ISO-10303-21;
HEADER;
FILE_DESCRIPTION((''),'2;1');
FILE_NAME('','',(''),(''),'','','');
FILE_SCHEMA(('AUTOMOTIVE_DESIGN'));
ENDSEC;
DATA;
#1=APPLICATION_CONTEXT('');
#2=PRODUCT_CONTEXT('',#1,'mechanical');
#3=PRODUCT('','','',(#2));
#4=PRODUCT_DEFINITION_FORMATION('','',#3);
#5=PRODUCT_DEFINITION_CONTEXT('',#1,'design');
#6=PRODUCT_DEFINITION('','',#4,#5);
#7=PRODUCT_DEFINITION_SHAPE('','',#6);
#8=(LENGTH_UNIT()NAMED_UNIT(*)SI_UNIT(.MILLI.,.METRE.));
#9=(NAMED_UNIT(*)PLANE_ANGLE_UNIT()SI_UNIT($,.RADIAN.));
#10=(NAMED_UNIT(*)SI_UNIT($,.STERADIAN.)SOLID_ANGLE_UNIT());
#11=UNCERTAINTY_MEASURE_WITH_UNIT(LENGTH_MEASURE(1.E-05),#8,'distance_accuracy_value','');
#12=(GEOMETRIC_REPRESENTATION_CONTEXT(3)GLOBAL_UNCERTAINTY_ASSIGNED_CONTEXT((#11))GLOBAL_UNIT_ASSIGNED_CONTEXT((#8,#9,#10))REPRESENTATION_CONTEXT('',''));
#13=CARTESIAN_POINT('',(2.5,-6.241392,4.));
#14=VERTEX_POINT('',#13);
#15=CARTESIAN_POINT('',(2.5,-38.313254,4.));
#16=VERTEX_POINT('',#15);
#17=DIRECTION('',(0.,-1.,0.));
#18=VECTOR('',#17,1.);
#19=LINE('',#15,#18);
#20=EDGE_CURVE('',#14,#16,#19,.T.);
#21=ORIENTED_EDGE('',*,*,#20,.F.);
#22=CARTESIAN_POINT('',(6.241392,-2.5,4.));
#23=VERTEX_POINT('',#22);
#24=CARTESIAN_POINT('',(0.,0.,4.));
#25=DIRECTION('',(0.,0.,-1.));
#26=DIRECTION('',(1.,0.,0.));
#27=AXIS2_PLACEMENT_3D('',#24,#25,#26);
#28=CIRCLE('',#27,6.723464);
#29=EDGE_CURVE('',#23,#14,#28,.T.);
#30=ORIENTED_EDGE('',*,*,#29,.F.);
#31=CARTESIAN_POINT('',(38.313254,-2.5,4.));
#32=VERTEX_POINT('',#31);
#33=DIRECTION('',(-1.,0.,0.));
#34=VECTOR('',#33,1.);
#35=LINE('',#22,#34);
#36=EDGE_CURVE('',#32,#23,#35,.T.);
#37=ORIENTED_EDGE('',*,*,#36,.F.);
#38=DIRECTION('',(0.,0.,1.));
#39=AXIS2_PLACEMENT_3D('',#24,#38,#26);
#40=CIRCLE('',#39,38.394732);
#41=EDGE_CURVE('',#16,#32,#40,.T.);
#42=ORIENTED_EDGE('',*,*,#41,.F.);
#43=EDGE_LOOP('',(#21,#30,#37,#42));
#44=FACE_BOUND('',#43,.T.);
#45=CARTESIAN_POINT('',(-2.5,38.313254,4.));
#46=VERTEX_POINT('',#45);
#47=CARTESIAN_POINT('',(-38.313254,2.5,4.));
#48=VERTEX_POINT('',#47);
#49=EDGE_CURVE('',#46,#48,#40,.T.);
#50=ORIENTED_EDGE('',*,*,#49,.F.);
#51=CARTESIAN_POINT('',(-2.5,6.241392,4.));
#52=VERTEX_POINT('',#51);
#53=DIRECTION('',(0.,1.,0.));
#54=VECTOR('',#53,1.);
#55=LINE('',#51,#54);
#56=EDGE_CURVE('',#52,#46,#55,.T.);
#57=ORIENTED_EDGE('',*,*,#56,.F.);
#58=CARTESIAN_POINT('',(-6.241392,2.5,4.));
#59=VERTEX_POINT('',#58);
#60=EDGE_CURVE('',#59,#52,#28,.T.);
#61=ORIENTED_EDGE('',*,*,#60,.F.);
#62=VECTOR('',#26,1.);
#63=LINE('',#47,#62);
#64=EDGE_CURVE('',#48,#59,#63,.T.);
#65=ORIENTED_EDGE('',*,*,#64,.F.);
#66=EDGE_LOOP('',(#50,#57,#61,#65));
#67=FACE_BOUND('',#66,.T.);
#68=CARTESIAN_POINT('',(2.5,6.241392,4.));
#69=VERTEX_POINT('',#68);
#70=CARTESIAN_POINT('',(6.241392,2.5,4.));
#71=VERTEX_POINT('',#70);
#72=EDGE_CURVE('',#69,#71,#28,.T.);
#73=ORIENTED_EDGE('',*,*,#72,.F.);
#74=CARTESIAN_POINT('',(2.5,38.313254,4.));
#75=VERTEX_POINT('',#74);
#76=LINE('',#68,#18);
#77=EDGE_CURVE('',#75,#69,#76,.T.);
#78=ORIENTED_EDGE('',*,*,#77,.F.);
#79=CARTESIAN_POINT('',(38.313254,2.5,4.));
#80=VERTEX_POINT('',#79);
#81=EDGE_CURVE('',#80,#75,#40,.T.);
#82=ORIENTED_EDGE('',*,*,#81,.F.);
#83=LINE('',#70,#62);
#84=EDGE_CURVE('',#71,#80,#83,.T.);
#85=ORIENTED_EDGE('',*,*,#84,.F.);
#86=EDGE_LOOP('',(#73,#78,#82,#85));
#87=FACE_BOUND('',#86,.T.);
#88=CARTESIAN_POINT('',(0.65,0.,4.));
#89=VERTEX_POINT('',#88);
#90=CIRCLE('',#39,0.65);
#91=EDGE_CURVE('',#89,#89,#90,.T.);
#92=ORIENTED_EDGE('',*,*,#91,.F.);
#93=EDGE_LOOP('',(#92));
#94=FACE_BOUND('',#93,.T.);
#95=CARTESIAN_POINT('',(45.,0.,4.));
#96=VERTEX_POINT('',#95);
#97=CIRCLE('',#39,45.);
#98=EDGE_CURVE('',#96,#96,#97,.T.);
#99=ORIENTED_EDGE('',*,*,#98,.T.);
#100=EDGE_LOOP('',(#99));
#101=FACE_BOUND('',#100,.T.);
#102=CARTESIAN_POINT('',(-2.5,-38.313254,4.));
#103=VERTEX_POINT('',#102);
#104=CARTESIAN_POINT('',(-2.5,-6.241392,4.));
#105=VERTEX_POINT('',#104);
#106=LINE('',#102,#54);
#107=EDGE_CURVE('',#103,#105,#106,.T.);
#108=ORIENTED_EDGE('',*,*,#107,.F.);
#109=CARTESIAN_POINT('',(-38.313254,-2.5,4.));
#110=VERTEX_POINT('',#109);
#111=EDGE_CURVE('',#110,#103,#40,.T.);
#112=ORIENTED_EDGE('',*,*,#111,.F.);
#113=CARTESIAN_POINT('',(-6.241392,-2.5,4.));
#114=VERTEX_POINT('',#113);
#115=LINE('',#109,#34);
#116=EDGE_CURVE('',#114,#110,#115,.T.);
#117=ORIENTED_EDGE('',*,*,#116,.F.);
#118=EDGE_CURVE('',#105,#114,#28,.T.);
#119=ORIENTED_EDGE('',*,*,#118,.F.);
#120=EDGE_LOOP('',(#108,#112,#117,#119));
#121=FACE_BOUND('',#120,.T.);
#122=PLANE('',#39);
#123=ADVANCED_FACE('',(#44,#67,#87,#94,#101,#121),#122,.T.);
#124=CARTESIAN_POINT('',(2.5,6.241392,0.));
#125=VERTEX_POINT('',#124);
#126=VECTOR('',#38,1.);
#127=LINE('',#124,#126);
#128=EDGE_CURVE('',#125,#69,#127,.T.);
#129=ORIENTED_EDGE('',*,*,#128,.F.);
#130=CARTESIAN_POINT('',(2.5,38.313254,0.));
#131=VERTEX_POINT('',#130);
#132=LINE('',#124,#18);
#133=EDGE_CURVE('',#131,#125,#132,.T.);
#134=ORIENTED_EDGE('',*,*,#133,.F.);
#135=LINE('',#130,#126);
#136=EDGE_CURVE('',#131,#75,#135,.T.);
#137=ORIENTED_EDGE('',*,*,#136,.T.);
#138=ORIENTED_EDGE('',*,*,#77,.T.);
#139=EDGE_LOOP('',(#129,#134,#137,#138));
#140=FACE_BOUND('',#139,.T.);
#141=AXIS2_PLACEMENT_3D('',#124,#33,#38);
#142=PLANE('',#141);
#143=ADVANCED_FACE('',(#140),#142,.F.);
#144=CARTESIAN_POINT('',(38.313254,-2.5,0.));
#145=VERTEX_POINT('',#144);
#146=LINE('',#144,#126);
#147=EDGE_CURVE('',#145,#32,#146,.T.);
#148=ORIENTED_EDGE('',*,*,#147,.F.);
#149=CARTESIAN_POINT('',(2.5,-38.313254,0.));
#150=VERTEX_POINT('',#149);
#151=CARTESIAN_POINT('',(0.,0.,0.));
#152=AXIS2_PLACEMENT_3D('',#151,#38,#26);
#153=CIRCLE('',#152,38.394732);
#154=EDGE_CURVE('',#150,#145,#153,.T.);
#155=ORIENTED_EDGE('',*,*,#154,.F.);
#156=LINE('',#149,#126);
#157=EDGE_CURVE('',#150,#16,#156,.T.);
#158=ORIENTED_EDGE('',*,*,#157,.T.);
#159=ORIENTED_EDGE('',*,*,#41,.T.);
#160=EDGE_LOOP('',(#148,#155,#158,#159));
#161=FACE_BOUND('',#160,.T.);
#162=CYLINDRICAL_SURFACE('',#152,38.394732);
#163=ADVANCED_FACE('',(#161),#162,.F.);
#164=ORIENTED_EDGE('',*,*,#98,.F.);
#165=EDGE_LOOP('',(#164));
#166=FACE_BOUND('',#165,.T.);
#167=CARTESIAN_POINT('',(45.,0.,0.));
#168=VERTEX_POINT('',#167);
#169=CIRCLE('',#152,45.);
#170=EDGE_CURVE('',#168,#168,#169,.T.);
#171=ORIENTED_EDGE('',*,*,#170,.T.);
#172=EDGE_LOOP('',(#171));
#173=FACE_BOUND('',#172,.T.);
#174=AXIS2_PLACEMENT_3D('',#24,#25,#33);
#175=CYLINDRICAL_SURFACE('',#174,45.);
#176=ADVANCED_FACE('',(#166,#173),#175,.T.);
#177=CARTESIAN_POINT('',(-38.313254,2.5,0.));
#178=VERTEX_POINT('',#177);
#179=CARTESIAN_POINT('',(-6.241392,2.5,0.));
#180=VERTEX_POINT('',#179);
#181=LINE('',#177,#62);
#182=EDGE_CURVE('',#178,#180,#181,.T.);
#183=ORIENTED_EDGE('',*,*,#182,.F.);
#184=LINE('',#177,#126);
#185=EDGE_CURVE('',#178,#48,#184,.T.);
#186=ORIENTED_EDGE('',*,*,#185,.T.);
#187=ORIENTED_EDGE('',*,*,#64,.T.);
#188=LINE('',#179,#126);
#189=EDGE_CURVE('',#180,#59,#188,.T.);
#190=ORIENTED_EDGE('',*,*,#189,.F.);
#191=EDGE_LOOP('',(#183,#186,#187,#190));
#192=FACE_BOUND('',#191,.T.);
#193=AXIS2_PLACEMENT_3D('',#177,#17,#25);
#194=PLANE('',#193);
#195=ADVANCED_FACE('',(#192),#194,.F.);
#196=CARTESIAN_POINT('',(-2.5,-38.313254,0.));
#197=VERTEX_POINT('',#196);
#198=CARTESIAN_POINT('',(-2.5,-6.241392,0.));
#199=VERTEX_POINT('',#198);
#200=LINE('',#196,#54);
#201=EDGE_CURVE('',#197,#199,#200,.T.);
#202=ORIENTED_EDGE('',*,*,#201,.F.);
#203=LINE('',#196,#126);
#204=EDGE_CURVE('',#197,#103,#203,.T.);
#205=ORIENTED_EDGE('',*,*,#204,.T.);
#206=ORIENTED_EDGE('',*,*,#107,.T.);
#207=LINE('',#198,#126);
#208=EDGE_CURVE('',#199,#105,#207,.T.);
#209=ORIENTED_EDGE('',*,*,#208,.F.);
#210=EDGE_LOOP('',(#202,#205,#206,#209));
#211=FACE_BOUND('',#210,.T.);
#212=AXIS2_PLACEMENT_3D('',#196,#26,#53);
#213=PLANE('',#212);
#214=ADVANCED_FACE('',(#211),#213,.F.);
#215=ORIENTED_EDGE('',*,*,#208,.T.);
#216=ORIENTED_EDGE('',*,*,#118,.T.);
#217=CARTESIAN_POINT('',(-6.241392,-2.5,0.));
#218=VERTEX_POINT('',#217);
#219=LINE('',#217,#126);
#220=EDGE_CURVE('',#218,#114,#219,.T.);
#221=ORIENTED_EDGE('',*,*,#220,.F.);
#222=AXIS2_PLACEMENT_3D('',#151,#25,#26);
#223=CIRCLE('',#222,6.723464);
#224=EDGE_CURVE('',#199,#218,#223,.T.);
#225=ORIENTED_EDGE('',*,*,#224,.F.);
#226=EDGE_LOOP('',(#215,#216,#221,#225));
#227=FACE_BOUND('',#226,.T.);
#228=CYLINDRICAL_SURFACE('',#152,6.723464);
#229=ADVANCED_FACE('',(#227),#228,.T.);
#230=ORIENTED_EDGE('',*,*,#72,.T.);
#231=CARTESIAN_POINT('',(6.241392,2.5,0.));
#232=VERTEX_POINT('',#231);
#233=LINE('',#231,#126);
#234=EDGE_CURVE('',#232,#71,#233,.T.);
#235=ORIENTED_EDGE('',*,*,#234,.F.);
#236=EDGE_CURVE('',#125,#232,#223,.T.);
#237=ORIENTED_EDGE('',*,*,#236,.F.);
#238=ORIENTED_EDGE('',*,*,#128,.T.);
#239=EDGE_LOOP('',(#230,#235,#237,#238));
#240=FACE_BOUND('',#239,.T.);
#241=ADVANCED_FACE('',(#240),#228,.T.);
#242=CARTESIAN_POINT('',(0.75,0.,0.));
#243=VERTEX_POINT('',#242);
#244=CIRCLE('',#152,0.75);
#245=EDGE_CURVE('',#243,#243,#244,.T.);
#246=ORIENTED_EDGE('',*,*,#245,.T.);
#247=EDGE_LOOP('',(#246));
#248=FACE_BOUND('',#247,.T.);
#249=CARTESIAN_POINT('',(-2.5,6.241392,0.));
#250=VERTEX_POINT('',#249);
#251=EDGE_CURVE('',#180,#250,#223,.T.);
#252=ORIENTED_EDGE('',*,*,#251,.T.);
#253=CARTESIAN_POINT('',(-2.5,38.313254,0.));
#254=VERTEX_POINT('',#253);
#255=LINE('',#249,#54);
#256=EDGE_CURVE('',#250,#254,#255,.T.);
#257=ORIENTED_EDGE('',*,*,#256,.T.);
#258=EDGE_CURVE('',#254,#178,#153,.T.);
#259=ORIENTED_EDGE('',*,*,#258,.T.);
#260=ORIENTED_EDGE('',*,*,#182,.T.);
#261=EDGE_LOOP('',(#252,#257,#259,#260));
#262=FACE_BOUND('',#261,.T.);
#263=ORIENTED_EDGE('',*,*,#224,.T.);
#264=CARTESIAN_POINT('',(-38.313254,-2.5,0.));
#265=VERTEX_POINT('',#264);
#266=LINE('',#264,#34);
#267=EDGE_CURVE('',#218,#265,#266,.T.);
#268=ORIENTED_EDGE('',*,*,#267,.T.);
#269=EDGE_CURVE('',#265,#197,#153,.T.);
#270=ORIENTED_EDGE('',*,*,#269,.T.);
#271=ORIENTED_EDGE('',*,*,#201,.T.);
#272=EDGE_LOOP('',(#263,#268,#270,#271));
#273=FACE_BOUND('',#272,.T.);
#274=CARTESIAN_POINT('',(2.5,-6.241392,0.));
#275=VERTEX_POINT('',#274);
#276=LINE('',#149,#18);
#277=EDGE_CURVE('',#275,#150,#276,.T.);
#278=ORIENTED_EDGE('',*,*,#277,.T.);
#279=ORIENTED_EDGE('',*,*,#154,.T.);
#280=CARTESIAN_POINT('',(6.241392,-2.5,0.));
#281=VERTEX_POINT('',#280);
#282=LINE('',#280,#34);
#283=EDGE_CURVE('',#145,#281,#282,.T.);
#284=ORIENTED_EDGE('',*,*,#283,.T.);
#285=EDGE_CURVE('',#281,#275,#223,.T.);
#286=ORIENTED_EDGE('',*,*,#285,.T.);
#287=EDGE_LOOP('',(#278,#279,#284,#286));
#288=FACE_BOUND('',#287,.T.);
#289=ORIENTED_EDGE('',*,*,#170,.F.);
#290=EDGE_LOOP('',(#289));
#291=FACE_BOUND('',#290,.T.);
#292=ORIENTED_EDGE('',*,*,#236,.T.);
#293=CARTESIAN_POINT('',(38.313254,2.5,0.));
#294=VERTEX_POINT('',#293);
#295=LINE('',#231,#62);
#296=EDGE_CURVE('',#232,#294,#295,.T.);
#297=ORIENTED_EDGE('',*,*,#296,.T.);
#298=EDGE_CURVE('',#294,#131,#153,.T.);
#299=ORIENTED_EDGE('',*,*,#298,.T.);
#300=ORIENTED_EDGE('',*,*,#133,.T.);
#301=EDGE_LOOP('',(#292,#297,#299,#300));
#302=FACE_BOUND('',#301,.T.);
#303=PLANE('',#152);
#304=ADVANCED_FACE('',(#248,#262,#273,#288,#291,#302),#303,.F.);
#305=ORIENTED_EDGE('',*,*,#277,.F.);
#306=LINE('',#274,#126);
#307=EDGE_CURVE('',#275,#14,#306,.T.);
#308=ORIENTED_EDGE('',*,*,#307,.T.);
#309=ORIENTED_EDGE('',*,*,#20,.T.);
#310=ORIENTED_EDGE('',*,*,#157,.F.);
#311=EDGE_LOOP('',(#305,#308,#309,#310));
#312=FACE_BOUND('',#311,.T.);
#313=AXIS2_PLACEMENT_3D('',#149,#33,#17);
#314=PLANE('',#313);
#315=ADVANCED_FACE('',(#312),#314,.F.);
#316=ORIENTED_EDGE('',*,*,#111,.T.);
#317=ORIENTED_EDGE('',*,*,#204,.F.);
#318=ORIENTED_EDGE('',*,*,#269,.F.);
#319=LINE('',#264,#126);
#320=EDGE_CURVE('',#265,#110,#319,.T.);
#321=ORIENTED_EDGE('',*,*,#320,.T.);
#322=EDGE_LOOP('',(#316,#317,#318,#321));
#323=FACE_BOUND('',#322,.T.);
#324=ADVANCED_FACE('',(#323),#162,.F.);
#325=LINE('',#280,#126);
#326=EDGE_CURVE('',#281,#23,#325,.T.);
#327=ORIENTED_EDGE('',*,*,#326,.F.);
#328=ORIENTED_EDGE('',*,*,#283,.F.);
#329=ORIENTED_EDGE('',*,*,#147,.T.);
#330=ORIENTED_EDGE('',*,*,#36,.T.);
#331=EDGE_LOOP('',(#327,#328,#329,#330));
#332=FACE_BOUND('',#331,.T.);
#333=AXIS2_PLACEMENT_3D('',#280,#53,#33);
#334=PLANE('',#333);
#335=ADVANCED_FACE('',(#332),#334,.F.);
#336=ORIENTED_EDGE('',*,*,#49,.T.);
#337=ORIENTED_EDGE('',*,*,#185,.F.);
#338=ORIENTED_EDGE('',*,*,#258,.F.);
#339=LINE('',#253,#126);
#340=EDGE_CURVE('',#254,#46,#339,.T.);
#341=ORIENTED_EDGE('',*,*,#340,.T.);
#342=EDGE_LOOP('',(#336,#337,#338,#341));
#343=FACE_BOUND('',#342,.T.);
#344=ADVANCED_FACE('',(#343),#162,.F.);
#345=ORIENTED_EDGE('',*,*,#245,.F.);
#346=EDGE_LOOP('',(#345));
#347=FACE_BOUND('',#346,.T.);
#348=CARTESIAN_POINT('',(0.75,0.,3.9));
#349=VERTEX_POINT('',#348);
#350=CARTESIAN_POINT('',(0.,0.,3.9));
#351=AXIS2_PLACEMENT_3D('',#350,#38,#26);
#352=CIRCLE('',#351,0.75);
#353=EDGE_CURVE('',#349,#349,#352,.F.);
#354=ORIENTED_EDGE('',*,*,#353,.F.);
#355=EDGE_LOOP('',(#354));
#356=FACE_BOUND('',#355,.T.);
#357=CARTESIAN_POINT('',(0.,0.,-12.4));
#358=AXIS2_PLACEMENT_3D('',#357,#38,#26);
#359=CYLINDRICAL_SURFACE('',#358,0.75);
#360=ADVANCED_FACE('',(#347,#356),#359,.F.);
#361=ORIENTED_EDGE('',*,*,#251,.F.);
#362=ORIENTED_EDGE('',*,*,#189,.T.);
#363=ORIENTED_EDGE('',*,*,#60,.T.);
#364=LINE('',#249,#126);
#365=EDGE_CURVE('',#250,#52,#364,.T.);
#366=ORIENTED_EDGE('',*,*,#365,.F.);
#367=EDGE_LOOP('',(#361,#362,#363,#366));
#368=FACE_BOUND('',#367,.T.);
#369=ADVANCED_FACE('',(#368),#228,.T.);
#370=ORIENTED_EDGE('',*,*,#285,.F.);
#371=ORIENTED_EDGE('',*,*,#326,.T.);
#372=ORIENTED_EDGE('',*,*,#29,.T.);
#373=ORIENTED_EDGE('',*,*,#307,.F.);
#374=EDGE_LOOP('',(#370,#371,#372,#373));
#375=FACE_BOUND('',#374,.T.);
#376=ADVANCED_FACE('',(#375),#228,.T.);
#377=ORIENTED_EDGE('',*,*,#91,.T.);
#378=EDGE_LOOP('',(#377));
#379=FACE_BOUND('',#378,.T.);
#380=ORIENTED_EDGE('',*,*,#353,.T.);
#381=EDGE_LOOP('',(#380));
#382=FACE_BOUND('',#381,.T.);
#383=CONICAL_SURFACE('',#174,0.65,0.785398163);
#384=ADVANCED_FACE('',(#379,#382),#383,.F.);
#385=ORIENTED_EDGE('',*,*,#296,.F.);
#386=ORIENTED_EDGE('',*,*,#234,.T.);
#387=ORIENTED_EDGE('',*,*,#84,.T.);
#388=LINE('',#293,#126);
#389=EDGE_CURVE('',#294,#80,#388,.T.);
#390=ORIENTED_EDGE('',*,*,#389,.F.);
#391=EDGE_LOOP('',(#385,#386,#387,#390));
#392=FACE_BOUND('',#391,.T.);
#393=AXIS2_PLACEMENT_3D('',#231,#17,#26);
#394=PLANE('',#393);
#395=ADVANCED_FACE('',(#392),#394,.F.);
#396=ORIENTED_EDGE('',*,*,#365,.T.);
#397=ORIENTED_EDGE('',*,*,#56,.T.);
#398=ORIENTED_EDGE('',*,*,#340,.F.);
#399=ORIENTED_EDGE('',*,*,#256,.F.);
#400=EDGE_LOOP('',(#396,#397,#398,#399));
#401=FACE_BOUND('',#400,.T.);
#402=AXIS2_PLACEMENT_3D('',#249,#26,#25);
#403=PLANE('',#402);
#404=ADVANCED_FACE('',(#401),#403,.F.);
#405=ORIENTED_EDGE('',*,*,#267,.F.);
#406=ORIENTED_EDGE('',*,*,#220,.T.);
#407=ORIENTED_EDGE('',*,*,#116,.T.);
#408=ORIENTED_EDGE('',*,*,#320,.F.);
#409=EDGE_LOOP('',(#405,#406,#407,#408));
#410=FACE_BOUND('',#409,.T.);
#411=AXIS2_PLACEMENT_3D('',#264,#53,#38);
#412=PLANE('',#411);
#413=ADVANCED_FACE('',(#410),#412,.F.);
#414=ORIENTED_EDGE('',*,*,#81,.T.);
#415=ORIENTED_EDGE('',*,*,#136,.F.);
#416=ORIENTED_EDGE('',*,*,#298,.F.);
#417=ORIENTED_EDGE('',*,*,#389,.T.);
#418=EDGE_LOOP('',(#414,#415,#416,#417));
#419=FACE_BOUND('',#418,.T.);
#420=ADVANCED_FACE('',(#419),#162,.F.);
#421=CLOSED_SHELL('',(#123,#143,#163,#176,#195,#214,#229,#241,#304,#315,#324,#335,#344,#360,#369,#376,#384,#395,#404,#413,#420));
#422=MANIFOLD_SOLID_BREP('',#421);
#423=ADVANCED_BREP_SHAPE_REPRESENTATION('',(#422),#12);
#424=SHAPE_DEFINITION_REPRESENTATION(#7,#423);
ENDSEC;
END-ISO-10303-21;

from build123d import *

# Parameters (mm, degrees)
SKETCH1_R           = 45
BOSS_EXTRUDE1_DEPTH = 4
CUT_EXTRUDE1_DEPTH  = 64.765194268


# Read off the part's stored shape, not the designer's step: Cavity1
with BuildPart() as part:
    # Sketch1 → Boss-Extrude1 (new body)
    with BuildSketch(Plane.XY):
        Circle(SKETCH1_R)
    extrude(amount=BOSS_EXTRUDE1_DEPTH)

    # Cavity1 outline → Cavity1 (revolve, cut)
    with BuildSketch(Plane.XZ):
        Polygon((0.75, 0), (0.75, 3.9), (0.65, 4), (0, 4), (0, 0), align=None)
    revolve(axis=Axis((0, 0, 0), (0, 0, 1)), mode=Mode.SUBTRACT)

    # Sketch2 → Cut-Extrude1 (cut, through all)
    with BuildSketch(Plane.XY.offset(4)):
        with BuildLine():
            Line((2.5, 6.241391614), (2.5, 38.313254027))
            ThreePointArc((2.5, 38.313254027), (27.149175256, 27.149175256), (38.313254027, 2.5))
            Line((38.313254027, 2.5), (6.241391614, 2.5))
            ThreePointArc((6.241391614, 2.5), (4.754207047, 4.754207047), (2.5, 6.241391614))
        make_face()
        with BuildLine():
            Line((-2.5, -38.313254027), (-2.5, -6.241391614))
            ThreePointArc((-2.5, -6.241391614), (-4.754207047, -4.754207047), (-6.241391614, -2.5))
            Line((-6.241391614, -2.5), (-38.313254027, -2.5))
            ThreePointArc((-38.313254027, -2.5), (-27.149175256, -27.149175256), (-2.5, -38.313254027))
        make_face()
        with BuildLine():
            Line((2.5, -38.313254027), (2.5, -6.241391614))
            ThreePointArc((2.5, -6.241391614), (4.754207047, -4.754207047), (6.241391614, -2.5))
            Line((6.241391614, -2.5), (38.313254027, -2.5))
            ThreePointArc((38.313254027, -2.5), (27.149175256, -27.149175256), (2.5, -38.313254027))
        make_face()
        with BuildLine():
            Line((-2.5, 6.241391614), (-2.5, 38.313254027))
            ThreePointArc((-2.5, 38.313254027), (-27.149175256, 27.149175256), (-38.313254027, 2.5))
            Line((-38.313254027, 2.5), (-6.241391614, 2.5))
            ThreePointArc((-6.241391614, 2.5), (-4.754207047, 4.754207047), (-2.5, 6.241391614))
        make_face()
    extrude(amount=-CUT_EXTRUDE1_DEPTH, mode=Mode.SUBTRACT)


solid = part.part
